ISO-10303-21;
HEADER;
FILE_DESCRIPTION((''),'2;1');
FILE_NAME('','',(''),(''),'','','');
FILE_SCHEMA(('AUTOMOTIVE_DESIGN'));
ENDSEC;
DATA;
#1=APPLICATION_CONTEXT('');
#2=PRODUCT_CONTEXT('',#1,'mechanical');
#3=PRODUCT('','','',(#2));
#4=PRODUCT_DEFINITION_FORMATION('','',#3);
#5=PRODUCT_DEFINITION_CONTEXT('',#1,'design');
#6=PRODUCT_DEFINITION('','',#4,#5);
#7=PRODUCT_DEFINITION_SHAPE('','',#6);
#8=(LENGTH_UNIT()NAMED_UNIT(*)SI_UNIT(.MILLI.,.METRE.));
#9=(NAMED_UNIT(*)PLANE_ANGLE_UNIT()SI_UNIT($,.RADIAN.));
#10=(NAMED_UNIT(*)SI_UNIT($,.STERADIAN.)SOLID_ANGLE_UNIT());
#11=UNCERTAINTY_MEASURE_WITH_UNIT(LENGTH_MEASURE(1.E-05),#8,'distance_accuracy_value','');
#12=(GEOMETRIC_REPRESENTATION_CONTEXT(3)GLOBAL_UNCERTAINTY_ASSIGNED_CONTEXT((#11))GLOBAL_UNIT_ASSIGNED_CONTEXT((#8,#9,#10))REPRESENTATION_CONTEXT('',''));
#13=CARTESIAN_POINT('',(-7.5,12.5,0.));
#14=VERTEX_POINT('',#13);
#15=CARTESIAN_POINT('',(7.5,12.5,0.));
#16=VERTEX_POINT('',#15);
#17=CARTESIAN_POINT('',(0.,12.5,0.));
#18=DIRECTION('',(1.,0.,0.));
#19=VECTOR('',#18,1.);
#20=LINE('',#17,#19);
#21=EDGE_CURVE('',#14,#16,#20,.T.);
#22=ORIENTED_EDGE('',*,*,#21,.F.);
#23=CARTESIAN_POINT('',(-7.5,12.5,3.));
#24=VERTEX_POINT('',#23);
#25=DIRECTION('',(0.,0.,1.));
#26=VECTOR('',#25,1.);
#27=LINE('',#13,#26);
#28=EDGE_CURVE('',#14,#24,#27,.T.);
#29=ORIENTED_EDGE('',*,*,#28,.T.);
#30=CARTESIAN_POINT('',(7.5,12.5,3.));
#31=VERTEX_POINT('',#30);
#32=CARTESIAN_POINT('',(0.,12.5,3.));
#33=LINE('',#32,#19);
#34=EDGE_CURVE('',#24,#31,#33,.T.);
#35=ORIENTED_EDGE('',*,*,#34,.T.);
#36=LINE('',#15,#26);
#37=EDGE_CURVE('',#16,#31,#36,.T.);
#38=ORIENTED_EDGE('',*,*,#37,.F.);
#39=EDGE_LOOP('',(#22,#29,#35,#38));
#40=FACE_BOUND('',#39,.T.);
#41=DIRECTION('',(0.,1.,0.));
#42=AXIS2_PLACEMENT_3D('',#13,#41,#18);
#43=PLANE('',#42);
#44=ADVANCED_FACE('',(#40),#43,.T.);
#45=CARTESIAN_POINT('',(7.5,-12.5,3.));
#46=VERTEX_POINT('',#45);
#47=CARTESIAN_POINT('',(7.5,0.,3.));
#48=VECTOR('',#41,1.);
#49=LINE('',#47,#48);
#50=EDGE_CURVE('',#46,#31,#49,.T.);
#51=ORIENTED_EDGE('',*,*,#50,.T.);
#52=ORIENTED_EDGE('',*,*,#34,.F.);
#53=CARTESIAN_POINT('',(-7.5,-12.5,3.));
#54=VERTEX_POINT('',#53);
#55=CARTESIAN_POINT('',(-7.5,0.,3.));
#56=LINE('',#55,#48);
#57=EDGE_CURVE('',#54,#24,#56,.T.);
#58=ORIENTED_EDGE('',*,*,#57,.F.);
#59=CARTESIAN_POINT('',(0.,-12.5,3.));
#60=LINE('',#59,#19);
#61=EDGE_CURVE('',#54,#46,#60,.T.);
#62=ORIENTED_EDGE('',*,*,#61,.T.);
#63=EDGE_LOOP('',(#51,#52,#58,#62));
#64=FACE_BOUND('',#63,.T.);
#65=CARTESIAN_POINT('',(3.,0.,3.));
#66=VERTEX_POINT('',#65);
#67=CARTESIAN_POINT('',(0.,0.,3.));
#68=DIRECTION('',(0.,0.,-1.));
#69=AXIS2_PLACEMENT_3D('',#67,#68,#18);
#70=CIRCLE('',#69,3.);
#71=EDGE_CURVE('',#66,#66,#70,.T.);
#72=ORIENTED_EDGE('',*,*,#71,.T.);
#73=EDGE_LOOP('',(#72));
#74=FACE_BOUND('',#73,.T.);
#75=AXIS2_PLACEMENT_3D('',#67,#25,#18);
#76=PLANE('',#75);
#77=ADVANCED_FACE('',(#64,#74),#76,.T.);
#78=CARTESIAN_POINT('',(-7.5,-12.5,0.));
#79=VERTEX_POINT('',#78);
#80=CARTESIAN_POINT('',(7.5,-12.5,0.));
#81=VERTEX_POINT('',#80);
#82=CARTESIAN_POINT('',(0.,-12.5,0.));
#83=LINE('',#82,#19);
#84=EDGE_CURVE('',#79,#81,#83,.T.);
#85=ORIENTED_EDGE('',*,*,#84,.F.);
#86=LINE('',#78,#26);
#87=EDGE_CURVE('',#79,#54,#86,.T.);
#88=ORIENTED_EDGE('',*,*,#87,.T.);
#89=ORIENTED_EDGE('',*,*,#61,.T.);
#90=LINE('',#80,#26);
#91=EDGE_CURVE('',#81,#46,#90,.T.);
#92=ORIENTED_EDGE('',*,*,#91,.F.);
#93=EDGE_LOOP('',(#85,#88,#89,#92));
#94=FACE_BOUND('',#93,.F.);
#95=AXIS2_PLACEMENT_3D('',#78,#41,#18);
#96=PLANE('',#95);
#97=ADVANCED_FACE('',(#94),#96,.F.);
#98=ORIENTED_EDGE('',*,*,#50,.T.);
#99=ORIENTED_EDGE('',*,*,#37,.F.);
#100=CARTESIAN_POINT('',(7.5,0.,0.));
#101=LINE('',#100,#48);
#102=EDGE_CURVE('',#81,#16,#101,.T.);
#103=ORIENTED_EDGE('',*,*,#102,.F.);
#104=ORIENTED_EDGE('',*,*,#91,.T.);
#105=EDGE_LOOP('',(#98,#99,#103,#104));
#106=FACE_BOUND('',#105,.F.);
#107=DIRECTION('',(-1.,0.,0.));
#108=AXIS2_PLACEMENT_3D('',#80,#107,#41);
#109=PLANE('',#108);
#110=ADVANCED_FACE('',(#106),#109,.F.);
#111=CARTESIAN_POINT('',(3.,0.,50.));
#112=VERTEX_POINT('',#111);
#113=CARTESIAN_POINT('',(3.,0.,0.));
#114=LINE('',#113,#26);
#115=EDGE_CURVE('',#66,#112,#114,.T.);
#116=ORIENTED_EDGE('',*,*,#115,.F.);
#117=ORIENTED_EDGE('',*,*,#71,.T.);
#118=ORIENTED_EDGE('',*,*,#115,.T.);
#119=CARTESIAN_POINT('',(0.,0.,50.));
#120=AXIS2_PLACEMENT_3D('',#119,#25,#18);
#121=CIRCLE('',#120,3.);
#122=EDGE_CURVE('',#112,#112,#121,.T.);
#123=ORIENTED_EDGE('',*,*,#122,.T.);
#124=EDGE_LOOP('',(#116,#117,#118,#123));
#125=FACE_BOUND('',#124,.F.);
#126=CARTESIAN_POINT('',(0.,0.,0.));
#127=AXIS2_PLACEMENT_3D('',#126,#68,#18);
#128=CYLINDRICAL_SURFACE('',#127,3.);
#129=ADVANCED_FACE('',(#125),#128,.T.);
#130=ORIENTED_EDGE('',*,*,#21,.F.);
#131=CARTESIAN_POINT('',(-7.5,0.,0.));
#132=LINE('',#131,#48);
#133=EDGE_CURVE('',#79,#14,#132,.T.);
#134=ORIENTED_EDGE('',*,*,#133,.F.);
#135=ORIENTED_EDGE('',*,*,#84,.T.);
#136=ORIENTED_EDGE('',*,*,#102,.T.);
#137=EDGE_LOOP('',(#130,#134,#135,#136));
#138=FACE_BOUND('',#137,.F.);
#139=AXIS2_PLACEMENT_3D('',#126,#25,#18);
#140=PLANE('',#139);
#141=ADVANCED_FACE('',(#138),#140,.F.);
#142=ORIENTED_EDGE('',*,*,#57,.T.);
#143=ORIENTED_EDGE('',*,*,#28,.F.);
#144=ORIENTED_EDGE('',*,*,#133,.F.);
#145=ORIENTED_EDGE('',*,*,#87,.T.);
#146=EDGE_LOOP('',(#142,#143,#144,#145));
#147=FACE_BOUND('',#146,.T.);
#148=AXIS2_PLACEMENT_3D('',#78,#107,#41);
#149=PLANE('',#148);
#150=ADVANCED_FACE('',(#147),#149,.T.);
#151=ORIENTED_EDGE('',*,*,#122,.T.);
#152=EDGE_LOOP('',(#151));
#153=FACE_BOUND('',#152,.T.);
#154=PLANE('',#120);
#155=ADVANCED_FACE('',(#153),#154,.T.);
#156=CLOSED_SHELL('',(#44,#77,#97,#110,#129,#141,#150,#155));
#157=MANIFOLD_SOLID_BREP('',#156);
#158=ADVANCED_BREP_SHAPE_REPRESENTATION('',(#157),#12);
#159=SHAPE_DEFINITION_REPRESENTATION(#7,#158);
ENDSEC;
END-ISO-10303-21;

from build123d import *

# Parameters (mm, degrees)
F0_W     = 15
F0_H     = 25
F1_DEPTH = 3
F2_R     = 3
F3_DEPTH = 50


# Not quite as in the source:
# - a feature names something its author has since deleted; it is built from what else it names


with BuildPart() as f1:
    # F0 (on Top) → F1 (new body)
    with BuildSketch(Plane.XY):
        Rectangle(F0_W, F0_H)
    extrude(amount=F1_DEPTH)

    # F2 (on Top) → F3 (join)
    with BuildSketch(Plane.XY):
        Circle(F2_R)
    extrude(amount=F3_DEPTH)


solid = f1.part
